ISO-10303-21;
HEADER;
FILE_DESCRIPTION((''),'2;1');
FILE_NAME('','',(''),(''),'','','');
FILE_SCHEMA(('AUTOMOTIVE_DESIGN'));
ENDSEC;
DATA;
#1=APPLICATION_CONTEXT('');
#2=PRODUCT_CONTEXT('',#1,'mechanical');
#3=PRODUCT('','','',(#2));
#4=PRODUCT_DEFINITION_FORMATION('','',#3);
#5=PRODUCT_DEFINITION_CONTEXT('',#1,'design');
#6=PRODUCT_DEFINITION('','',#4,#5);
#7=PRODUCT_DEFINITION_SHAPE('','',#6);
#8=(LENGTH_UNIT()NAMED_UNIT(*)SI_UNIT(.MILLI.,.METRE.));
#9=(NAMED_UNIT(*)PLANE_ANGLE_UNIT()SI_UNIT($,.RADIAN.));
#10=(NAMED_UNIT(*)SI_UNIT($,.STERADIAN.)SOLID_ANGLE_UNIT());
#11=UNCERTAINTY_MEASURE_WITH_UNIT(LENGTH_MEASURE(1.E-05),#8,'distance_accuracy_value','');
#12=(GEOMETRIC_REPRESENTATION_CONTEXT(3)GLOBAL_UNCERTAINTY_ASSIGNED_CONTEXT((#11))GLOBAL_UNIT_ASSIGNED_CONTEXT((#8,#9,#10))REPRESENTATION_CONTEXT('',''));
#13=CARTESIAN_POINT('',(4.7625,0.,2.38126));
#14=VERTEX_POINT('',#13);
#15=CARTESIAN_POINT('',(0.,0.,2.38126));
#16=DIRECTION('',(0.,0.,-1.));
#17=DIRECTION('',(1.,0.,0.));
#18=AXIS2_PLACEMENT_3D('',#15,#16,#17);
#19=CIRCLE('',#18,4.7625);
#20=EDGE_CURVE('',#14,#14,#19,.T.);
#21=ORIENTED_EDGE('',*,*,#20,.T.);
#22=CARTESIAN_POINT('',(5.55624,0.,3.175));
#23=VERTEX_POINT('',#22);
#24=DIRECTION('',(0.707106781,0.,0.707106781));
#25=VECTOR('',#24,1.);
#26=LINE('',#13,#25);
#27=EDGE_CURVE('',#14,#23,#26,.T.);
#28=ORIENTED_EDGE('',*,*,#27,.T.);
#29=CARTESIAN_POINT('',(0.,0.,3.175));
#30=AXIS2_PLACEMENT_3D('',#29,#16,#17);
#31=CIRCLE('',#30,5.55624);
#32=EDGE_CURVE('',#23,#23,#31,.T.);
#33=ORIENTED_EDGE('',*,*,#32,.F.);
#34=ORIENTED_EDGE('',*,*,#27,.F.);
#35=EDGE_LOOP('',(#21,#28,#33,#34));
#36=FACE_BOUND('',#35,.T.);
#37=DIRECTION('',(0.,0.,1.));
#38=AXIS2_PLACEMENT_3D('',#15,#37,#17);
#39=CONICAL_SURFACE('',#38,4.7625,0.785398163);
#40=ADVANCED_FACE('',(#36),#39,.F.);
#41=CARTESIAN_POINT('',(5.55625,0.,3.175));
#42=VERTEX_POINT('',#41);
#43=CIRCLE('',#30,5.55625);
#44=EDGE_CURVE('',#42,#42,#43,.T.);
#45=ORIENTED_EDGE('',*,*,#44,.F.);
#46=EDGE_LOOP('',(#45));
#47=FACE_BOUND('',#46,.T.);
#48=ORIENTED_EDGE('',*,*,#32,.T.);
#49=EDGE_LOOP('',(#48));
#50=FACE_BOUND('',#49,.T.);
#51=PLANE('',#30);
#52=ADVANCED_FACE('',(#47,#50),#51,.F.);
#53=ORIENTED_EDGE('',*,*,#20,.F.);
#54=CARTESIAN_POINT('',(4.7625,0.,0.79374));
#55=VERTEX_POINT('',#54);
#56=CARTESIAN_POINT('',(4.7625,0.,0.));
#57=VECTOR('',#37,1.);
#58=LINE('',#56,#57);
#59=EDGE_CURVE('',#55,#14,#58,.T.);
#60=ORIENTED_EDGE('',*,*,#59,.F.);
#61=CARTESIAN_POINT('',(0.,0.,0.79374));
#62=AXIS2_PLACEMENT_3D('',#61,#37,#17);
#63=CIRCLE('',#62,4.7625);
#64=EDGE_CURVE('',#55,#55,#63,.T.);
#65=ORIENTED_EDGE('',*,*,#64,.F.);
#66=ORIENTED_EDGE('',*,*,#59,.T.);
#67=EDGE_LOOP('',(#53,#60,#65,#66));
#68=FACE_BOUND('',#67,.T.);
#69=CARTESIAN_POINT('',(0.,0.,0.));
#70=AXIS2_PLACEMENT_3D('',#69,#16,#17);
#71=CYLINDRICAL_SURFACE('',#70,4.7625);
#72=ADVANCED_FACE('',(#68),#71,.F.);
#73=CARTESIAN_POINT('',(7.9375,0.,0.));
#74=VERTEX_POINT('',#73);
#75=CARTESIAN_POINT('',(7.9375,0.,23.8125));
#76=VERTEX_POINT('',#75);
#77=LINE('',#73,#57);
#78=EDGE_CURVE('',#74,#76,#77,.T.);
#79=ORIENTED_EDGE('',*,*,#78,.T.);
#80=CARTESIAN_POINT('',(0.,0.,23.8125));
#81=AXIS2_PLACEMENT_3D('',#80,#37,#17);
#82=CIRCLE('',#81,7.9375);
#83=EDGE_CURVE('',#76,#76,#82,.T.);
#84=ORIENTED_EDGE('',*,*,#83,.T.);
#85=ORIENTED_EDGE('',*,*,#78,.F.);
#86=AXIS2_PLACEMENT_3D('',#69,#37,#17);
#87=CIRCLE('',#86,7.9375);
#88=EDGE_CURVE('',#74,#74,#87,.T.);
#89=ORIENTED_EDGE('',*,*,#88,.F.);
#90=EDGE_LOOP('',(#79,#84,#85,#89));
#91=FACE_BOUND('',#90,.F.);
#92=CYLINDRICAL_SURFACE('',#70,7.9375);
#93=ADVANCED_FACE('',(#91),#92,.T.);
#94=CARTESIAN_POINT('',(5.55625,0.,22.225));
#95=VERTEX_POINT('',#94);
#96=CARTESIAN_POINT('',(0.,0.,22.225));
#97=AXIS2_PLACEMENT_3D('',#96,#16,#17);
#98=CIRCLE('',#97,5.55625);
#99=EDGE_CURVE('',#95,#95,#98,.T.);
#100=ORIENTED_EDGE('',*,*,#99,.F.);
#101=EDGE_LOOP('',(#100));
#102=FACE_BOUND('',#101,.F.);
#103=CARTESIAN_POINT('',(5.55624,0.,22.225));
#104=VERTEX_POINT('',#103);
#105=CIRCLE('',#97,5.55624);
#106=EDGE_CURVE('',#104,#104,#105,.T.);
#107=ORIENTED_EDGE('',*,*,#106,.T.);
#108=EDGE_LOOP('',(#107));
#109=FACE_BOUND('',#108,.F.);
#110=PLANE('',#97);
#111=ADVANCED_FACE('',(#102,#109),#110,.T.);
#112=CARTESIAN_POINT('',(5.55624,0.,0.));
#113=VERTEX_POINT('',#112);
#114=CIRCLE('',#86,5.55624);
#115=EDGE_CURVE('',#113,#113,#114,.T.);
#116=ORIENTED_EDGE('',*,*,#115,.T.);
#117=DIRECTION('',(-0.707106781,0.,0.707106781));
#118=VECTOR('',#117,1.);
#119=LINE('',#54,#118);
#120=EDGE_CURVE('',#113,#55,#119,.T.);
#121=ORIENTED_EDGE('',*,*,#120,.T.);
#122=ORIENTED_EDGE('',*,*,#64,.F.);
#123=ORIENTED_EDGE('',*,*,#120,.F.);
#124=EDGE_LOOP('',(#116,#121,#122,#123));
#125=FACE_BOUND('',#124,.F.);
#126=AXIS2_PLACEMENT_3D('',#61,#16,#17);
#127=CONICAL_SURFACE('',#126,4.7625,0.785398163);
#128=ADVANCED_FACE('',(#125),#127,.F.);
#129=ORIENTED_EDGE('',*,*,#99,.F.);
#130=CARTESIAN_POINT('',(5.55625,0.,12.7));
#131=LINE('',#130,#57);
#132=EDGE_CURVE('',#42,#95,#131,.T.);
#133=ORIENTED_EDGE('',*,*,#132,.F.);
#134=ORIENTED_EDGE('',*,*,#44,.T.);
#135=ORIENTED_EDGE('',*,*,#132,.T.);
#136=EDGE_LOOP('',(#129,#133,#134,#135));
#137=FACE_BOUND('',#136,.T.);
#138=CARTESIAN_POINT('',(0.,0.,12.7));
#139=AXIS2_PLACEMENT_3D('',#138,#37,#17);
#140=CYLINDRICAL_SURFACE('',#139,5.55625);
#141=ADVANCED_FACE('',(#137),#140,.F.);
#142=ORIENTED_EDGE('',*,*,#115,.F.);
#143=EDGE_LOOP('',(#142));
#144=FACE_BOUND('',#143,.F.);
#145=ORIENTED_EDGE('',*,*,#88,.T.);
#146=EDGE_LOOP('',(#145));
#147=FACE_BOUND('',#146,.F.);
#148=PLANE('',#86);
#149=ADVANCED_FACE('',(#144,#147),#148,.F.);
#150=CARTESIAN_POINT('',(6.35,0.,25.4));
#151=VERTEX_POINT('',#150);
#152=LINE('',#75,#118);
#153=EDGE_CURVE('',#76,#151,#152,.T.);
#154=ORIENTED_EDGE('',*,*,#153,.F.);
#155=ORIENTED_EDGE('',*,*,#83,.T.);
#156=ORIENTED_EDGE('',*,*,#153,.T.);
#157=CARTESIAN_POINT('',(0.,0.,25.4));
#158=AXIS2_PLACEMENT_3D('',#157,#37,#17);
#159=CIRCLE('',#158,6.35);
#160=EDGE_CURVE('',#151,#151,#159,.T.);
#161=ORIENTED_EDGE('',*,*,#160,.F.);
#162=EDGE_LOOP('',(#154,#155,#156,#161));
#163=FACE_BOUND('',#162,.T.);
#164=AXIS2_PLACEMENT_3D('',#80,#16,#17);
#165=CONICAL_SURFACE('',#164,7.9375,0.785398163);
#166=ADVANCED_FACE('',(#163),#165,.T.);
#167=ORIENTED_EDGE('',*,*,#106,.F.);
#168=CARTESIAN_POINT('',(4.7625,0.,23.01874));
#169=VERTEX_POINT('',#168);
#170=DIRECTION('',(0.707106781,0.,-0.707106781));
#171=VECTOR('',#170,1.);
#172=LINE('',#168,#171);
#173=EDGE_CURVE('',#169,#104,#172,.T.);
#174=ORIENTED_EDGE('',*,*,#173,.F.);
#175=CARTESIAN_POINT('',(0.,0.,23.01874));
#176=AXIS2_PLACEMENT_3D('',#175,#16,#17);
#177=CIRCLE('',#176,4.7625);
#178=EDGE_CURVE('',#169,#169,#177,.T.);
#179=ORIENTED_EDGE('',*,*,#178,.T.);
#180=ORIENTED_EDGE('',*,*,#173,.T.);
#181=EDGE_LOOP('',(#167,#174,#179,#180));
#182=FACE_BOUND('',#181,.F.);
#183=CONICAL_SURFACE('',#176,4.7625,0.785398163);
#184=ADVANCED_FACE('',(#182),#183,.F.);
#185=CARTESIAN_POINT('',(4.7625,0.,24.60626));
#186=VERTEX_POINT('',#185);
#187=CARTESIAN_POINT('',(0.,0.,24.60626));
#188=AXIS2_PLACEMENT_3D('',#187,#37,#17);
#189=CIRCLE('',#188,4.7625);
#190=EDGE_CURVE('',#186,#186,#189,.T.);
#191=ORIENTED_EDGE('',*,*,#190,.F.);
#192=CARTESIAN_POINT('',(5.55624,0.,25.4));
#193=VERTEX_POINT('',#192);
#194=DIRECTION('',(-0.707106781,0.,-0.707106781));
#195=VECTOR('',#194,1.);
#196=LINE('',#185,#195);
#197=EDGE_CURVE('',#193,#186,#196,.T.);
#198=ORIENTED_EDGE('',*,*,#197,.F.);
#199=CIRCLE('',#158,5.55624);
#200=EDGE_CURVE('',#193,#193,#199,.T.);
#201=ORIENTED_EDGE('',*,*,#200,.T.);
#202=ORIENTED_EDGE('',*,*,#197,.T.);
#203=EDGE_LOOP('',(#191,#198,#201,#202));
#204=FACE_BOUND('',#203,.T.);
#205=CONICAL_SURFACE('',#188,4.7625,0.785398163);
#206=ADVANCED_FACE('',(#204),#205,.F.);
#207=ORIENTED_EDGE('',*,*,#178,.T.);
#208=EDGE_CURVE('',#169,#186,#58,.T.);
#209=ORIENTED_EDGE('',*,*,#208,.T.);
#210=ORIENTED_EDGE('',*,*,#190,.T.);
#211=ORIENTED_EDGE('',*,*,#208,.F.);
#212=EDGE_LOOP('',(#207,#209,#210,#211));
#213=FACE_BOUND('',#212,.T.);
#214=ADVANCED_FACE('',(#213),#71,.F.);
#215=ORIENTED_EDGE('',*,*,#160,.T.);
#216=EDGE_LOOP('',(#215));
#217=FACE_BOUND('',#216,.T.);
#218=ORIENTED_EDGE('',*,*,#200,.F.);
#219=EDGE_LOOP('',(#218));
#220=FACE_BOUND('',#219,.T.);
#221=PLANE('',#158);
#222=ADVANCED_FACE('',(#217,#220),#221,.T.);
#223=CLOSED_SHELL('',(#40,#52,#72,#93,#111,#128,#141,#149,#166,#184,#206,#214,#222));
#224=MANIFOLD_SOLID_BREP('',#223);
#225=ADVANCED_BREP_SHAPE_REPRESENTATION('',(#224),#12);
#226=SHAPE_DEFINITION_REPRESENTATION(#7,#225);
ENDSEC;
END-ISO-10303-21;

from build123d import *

# Parameters (mm, degrees)
F0_R     = 7.9375
F0_R_2   = 4.7625
F1_DEPTH = 25.4
F2_SIZE  = 1.5875
F3_W     = 5.55625
F3_H     = 19.05
F5_SIZE  = 0.79374


# Not quite as in the source:
# - a fillet or chamfer is up to 0.001 mm smaller than in the source, because OpenCascade refuses the exact size


with BuildPart() as f1:
    # F0 (on Top) → F1 (new body)
    with BuildSketch(Plane.XY):
        Circle(F0_R)
        Circle(F0_R_2, mode=Mode.SUBTRACT)
    extrude(amount=F1_DEPTH)

    # F2
    f2_edges = [f1.edges().sort_by_distance(p)[0] for p in [
        (-7.9375, 0, 25.4),
    ]]
    chamfer(f2_edges, length=F2_SIZE)

    # F3 (on Front) → F4 (revolve, cut)
    with BuildSketch(Plane.XZ):
        with Locations((2.778125, 12.7)):
            Rectangle(F3_W, F3_H)
    revolve(axis=Axis((0, 0, 0), (0, 0, -1)), mode=Mode.SUBTRACT)

    # F5 (size 0.79375 in the source; OpenCascade refuses exactly that, so slightly less here)
    f5_edges = [f1.edges().sort_by_distance(p)[0] for p in [
        (-4.7625, 0, 0),
        (-4.7625, 0, 3.175),
        (-4.7625, 0, 22.225),
        (-4.7625, 0, 25.4),
    ]]
    chamfer(f5_edges, length=F5_SIZE)


solid = f1.part
